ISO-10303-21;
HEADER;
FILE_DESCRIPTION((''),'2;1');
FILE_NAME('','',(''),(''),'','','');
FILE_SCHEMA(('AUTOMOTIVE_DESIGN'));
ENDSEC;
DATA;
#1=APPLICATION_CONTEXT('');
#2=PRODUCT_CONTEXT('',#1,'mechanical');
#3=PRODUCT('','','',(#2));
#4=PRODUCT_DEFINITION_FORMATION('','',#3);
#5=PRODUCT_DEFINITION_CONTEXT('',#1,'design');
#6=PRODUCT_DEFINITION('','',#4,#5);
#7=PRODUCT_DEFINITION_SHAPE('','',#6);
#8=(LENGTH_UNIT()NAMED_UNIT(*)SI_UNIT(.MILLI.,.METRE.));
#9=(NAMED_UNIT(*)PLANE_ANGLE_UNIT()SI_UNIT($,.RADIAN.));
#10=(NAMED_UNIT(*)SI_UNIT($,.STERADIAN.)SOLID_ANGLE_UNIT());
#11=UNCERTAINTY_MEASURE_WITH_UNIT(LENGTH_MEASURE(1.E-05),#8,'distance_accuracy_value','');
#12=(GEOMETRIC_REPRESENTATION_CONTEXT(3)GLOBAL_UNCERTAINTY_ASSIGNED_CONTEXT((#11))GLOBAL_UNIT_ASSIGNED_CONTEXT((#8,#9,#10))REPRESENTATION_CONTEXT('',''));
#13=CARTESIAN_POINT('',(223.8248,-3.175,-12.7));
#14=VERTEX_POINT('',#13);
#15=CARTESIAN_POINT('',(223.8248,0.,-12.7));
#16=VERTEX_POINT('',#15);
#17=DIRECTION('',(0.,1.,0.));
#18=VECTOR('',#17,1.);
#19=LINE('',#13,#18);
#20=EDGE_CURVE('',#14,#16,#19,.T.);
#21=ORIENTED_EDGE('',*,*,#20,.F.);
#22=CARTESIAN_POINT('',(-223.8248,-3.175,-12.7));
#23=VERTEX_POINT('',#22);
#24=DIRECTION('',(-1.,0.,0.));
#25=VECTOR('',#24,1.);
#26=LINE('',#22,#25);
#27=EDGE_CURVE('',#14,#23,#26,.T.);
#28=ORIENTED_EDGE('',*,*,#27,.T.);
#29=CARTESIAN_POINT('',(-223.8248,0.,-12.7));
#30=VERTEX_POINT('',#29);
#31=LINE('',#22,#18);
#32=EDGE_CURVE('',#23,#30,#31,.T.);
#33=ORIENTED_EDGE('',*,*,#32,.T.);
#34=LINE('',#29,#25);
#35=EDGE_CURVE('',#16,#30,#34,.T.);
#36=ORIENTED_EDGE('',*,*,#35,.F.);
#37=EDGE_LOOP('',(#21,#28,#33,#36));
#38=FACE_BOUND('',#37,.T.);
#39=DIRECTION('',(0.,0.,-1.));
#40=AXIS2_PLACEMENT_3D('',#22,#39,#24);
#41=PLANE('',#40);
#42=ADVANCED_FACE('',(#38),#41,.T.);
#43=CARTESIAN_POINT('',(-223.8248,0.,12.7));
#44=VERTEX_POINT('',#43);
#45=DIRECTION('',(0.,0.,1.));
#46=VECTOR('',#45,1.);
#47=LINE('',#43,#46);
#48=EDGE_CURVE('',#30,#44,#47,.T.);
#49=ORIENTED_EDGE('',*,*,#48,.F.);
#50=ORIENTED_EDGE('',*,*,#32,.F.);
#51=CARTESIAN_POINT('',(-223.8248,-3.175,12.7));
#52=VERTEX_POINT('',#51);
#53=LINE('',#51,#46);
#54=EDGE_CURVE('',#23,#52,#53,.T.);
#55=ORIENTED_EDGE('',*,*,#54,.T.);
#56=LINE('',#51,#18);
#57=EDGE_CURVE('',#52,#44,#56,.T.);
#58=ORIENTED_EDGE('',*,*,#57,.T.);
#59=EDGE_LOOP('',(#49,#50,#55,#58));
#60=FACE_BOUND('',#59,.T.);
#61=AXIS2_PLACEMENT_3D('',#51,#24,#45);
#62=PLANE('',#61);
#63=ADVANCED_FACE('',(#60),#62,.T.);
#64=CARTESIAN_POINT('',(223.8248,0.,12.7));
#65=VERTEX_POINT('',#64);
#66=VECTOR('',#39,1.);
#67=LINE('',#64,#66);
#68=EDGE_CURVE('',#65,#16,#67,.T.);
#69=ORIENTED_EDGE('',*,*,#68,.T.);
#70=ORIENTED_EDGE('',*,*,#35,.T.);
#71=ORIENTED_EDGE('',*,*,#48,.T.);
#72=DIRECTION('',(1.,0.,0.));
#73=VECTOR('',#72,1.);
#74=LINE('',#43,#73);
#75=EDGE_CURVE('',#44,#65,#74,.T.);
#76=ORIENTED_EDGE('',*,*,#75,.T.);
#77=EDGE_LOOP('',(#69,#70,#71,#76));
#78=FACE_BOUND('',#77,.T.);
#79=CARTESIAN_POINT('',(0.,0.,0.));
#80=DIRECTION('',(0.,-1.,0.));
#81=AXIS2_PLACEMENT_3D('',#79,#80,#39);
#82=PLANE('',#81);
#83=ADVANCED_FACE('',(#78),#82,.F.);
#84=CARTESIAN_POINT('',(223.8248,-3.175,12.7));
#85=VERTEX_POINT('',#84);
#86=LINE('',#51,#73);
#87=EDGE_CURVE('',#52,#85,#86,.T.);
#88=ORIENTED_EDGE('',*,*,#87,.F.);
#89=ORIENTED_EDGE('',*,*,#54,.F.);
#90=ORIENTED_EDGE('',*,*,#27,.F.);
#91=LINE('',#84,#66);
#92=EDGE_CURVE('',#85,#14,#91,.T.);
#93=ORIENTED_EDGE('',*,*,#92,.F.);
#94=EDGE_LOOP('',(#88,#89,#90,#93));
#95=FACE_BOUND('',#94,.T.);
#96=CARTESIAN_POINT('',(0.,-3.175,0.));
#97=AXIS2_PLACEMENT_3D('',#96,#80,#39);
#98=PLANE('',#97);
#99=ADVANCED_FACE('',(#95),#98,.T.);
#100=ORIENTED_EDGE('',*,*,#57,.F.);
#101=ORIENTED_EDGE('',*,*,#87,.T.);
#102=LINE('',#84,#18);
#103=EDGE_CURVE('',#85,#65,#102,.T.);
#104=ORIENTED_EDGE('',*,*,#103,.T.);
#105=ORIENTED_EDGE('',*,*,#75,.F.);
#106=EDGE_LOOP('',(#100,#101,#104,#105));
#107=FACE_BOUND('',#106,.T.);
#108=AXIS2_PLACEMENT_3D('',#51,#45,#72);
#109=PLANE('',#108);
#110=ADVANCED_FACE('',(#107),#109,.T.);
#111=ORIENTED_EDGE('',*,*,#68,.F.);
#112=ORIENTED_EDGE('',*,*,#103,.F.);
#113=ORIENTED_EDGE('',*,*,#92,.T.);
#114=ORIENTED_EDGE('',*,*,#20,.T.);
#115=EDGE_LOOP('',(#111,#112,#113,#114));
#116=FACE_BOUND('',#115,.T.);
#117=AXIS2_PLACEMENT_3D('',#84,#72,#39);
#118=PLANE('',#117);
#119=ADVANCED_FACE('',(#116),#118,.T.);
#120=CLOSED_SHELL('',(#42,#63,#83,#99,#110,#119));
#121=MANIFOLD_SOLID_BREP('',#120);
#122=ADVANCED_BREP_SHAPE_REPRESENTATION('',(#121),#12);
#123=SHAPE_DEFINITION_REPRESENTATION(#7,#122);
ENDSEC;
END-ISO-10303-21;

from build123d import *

# Parameters (mm, degrees)
SKETCH1_W          = 447.6496
SKETCH1_H          = 25.4
BASE_FLANGE1_DEPTH = 3.175


# Sheet-metal steps are written as plain solids
with BuildPart() as part:
    # Sketch1 → Base-Flange1 (new body)
    with BuildSketch(Plane(origin=(0, 0, 0), x_dir=(1, 0, 0), z_dir=(0, 1, 0))):
        Rectangle(SKETCH1_W, SKETCH1_H)
    extrude(amount=-BASE_FLANGE1_DEPTH)


solid = part.part
